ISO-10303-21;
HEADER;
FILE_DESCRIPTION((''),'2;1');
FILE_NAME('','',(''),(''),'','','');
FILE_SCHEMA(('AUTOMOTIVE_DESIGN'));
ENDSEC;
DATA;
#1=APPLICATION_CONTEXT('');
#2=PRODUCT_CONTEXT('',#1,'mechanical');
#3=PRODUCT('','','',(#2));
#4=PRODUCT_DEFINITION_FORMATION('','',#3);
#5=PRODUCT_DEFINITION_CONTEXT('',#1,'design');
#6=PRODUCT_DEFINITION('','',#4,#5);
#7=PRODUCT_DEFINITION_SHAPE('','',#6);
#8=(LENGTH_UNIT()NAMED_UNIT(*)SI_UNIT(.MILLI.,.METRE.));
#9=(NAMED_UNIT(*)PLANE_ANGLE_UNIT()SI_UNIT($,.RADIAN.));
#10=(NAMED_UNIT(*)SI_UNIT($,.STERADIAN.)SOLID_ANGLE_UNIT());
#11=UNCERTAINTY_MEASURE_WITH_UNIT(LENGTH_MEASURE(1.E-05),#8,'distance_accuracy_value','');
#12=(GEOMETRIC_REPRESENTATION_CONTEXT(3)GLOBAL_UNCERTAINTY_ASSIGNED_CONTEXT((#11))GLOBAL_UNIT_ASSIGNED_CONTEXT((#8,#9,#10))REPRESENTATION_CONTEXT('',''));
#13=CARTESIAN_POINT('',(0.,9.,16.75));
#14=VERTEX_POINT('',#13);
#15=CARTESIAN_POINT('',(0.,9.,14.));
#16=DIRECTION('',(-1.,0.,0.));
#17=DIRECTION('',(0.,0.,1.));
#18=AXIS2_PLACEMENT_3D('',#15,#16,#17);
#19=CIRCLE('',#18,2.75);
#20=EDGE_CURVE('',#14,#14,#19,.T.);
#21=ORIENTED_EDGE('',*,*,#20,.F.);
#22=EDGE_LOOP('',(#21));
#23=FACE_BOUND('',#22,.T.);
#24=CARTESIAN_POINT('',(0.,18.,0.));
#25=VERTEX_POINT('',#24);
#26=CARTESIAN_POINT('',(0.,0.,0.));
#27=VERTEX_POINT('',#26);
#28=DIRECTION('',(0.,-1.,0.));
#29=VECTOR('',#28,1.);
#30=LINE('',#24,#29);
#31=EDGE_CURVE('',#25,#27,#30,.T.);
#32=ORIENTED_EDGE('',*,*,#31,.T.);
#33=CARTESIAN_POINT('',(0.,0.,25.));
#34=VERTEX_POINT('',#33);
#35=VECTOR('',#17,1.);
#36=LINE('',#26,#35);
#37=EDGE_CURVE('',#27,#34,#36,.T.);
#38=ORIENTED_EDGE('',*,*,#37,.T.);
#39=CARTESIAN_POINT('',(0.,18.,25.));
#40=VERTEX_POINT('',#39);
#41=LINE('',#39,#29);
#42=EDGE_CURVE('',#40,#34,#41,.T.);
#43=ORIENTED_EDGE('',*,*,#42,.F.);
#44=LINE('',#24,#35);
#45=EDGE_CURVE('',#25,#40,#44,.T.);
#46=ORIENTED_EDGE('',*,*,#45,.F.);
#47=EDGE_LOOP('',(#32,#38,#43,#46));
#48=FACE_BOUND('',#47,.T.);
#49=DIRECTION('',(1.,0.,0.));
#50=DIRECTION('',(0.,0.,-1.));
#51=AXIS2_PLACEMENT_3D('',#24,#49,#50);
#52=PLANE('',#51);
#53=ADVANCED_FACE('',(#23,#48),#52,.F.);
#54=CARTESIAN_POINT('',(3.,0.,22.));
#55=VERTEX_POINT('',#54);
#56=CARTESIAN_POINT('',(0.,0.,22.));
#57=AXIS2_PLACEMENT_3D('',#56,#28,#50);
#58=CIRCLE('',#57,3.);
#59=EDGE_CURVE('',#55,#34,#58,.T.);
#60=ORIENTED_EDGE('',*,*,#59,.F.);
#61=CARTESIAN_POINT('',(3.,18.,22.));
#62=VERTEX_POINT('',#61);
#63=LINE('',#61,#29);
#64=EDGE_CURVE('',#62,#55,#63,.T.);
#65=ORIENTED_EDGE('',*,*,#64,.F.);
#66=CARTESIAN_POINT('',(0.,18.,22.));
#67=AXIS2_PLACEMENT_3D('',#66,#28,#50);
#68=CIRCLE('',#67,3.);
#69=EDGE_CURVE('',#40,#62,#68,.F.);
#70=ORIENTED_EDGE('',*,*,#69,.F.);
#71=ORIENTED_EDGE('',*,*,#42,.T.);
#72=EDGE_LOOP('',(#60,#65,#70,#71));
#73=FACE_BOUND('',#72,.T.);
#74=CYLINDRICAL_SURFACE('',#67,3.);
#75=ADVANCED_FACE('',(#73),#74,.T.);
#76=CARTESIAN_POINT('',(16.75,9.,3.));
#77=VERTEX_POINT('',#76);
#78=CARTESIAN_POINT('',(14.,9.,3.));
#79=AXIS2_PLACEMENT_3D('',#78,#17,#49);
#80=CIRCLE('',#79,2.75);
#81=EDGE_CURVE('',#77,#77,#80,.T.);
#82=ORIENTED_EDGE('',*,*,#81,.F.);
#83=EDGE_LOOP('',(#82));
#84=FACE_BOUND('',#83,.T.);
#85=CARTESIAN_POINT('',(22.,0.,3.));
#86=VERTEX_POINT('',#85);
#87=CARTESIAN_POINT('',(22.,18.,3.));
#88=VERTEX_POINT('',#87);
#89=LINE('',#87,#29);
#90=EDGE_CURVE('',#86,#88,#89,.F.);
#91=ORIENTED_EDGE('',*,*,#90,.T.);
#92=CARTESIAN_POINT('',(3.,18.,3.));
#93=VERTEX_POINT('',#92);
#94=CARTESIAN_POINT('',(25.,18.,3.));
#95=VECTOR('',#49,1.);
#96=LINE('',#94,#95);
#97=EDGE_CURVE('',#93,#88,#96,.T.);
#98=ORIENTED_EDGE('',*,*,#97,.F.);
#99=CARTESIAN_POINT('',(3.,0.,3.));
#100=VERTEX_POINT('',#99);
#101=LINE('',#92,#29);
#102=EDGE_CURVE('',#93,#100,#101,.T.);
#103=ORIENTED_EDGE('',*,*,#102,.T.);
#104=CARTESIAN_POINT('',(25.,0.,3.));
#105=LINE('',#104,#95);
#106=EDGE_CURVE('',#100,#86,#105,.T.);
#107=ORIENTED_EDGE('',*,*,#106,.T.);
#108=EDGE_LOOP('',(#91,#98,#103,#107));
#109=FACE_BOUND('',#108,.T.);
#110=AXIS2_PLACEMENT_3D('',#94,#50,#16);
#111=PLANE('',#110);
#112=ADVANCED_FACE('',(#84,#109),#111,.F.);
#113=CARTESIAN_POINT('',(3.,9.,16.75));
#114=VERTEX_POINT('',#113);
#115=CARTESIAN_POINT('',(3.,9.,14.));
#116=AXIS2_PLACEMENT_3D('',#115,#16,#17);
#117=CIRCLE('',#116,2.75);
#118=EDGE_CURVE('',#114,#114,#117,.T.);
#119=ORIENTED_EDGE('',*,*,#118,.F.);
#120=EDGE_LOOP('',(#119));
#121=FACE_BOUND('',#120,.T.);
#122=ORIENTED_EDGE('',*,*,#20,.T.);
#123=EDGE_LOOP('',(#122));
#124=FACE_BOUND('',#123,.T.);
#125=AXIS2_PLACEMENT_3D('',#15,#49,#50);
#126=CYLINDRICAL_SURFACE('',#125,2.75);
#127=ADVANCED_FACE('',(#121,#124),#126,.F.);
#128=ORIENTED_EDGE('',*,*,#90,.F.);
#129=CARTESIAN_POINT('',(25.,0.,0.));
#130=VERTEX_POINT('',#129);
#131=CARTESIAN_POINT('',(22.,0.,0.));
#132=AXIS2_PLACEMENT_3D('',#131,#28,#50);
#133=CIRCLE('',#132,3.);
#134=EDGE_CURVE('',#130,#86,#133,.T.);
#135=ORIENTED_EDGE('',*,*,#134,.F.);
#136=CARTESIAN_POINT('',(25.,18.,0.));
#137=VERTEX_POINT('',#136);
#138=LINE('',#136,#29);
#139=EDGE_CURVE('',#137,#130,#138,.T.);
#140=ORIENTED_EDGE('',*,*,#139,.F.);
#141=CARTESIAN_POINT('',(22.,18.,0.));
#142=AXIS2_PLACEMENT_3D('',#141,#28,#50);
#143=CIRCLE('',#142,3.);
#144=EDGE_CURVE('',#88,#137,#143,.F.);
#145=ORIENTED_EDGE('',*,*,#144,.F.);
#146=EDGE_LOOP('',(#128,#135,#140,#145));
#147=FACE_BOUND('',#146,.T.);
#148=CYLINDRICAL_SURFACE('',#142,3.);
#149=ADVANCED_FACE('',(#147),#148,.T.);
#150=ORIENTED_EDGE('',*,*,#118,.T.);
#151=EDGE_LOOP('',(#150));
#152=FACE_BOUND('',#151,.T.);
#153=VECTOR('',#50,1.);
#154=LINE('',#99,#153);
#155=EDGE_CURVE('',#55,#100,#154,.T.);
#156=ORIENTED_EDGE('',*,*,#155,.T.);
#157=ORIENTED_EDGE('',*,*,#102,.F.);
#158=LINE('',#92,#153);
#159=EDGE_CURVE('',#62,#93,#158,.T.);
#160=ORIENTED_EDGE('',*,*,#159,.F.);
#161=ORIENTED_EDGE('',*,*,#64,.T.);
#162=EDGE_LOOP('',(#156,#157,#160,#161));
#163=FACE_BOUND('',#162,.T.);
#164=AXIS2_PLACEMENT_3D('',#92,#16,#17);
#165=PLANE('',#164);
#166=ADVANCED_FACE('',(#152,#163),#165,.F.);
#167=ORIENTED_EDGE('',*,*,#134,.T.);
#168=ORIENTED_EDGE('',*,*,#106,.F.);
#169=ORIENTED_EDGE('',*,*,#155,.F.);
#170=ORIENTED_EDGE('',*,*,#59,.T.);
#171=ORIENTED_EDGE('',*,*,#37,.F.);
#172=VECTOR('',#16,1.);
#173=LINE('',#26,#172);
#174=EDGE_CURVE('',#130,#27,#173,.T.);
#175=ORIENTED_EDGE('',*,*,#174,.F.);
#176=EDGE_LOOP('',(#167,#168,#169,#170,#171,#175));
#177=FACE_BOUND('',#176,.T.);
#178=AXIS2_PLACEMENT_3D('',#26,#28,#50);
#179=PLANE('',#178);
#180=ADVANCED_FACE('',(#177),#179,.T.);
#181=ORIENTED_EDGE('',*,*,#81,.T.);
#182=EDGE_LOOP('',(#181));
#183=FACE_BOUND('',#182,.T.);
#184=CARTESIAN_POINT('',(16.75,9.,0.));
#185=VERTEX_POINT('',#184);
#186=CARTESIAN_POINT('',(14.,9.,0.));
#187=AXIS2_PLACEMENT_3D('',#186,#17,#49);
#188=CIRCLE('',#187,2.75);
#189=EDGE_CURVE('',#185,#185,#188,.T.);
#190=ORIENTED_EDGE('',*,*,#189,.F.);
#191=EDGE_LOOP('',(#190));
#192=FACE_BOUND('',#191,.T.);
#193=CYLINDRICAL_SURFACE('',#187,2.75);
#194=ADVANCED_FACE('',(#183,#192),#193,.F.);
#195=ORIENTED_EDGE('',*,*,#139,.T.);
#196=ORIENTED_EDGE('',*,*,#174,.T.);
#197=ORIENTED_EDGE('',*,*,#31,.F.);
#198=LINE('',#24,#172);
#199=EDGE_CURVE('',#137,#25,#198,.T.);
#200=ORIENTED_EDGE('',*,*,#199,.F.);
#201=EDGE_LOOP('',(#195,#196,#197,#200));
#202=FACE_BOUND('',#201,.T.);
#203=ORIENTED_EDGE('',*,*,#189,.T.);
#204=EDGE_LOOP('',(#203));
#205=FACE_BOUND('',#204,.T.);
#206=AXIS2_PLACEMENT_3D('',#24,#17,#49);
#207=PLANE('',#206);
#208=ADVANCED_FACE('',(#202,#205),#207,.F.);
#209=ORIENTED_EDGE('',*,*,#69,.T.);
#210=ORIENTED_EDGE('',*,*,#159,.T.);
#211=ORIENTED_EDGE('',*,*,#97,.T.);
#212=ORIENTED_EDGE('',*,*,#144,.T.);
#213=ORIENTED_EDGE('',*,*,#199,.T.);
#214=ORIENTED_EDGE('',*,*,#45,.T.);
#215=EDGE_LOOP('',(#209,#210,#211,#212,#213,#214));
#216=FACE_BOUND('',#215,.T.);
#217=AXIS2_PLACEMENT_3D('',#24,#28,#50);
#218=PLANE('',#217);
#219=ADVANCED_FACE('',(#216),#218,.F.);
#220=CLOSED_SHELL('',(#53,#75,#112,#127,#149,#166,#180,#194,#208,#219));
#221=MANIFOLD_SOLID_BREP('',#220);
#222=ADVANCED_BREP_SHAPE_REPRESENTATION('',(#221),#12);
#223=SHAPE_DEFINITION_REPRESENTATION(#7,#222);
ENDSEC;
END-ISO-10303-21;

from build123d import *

# Parameters (mm, degrees)
BOSS_EXTRUDE1_DEPTH = 18
SKETCH3_R           = 2.75
CUT_EXTRUDE2_DEPTH  = 38.854986461
FILLET1_R           = 3


with BuildPart() as part:
    # Sketch2 → Boss-Extrude1 (new body)
    with BuildSketch(Plane(origin=(0, 0, 0), x_dir=(-1, 0, 0), z_dir=(0, 1, 0))):
        Polygon((0, 0), (0, 25), (-3, 25), (-3, 3), (-25, 3), (-25, 0), align=None)
    extrude(amount=BOSS_EXTRUDE1_DEPTH)

    # Sketch3 → Cut-Extrude2 (cut, through all)
    with BuildSketch(Plane.XY.offset(3)):
        with Locations((14, 9)):
            Circle(SKETCH3_R)
    cut_extrude2 = extrude(amount=-CUT_EXTRUDE2_DEPTH, mode=Mode.SUBTRACT)

    # Mirror1: Cut-Extrude2 across plane
    add(cut_extrude2.mirror(Plane(origin=(0, 0, 0), x_dir=(0.7071067811865465, 0, 0.7071067811865486), z_dir=(-0.7071067811865488, 0, 0.7071067811865464))), mode=Mode.SUBTRACT)

    # Fillet1
    fillet1_edges = [part.edges().sort_by_distance(p)[0] for p in [
        (3, 9, 25),
        (25, 9, 3),
    ]]
    fillet(fillet1_edges, radius=FILLET1_R - 0.0001)  # a hair under: the kernel refuses the full size


solid = part.part
